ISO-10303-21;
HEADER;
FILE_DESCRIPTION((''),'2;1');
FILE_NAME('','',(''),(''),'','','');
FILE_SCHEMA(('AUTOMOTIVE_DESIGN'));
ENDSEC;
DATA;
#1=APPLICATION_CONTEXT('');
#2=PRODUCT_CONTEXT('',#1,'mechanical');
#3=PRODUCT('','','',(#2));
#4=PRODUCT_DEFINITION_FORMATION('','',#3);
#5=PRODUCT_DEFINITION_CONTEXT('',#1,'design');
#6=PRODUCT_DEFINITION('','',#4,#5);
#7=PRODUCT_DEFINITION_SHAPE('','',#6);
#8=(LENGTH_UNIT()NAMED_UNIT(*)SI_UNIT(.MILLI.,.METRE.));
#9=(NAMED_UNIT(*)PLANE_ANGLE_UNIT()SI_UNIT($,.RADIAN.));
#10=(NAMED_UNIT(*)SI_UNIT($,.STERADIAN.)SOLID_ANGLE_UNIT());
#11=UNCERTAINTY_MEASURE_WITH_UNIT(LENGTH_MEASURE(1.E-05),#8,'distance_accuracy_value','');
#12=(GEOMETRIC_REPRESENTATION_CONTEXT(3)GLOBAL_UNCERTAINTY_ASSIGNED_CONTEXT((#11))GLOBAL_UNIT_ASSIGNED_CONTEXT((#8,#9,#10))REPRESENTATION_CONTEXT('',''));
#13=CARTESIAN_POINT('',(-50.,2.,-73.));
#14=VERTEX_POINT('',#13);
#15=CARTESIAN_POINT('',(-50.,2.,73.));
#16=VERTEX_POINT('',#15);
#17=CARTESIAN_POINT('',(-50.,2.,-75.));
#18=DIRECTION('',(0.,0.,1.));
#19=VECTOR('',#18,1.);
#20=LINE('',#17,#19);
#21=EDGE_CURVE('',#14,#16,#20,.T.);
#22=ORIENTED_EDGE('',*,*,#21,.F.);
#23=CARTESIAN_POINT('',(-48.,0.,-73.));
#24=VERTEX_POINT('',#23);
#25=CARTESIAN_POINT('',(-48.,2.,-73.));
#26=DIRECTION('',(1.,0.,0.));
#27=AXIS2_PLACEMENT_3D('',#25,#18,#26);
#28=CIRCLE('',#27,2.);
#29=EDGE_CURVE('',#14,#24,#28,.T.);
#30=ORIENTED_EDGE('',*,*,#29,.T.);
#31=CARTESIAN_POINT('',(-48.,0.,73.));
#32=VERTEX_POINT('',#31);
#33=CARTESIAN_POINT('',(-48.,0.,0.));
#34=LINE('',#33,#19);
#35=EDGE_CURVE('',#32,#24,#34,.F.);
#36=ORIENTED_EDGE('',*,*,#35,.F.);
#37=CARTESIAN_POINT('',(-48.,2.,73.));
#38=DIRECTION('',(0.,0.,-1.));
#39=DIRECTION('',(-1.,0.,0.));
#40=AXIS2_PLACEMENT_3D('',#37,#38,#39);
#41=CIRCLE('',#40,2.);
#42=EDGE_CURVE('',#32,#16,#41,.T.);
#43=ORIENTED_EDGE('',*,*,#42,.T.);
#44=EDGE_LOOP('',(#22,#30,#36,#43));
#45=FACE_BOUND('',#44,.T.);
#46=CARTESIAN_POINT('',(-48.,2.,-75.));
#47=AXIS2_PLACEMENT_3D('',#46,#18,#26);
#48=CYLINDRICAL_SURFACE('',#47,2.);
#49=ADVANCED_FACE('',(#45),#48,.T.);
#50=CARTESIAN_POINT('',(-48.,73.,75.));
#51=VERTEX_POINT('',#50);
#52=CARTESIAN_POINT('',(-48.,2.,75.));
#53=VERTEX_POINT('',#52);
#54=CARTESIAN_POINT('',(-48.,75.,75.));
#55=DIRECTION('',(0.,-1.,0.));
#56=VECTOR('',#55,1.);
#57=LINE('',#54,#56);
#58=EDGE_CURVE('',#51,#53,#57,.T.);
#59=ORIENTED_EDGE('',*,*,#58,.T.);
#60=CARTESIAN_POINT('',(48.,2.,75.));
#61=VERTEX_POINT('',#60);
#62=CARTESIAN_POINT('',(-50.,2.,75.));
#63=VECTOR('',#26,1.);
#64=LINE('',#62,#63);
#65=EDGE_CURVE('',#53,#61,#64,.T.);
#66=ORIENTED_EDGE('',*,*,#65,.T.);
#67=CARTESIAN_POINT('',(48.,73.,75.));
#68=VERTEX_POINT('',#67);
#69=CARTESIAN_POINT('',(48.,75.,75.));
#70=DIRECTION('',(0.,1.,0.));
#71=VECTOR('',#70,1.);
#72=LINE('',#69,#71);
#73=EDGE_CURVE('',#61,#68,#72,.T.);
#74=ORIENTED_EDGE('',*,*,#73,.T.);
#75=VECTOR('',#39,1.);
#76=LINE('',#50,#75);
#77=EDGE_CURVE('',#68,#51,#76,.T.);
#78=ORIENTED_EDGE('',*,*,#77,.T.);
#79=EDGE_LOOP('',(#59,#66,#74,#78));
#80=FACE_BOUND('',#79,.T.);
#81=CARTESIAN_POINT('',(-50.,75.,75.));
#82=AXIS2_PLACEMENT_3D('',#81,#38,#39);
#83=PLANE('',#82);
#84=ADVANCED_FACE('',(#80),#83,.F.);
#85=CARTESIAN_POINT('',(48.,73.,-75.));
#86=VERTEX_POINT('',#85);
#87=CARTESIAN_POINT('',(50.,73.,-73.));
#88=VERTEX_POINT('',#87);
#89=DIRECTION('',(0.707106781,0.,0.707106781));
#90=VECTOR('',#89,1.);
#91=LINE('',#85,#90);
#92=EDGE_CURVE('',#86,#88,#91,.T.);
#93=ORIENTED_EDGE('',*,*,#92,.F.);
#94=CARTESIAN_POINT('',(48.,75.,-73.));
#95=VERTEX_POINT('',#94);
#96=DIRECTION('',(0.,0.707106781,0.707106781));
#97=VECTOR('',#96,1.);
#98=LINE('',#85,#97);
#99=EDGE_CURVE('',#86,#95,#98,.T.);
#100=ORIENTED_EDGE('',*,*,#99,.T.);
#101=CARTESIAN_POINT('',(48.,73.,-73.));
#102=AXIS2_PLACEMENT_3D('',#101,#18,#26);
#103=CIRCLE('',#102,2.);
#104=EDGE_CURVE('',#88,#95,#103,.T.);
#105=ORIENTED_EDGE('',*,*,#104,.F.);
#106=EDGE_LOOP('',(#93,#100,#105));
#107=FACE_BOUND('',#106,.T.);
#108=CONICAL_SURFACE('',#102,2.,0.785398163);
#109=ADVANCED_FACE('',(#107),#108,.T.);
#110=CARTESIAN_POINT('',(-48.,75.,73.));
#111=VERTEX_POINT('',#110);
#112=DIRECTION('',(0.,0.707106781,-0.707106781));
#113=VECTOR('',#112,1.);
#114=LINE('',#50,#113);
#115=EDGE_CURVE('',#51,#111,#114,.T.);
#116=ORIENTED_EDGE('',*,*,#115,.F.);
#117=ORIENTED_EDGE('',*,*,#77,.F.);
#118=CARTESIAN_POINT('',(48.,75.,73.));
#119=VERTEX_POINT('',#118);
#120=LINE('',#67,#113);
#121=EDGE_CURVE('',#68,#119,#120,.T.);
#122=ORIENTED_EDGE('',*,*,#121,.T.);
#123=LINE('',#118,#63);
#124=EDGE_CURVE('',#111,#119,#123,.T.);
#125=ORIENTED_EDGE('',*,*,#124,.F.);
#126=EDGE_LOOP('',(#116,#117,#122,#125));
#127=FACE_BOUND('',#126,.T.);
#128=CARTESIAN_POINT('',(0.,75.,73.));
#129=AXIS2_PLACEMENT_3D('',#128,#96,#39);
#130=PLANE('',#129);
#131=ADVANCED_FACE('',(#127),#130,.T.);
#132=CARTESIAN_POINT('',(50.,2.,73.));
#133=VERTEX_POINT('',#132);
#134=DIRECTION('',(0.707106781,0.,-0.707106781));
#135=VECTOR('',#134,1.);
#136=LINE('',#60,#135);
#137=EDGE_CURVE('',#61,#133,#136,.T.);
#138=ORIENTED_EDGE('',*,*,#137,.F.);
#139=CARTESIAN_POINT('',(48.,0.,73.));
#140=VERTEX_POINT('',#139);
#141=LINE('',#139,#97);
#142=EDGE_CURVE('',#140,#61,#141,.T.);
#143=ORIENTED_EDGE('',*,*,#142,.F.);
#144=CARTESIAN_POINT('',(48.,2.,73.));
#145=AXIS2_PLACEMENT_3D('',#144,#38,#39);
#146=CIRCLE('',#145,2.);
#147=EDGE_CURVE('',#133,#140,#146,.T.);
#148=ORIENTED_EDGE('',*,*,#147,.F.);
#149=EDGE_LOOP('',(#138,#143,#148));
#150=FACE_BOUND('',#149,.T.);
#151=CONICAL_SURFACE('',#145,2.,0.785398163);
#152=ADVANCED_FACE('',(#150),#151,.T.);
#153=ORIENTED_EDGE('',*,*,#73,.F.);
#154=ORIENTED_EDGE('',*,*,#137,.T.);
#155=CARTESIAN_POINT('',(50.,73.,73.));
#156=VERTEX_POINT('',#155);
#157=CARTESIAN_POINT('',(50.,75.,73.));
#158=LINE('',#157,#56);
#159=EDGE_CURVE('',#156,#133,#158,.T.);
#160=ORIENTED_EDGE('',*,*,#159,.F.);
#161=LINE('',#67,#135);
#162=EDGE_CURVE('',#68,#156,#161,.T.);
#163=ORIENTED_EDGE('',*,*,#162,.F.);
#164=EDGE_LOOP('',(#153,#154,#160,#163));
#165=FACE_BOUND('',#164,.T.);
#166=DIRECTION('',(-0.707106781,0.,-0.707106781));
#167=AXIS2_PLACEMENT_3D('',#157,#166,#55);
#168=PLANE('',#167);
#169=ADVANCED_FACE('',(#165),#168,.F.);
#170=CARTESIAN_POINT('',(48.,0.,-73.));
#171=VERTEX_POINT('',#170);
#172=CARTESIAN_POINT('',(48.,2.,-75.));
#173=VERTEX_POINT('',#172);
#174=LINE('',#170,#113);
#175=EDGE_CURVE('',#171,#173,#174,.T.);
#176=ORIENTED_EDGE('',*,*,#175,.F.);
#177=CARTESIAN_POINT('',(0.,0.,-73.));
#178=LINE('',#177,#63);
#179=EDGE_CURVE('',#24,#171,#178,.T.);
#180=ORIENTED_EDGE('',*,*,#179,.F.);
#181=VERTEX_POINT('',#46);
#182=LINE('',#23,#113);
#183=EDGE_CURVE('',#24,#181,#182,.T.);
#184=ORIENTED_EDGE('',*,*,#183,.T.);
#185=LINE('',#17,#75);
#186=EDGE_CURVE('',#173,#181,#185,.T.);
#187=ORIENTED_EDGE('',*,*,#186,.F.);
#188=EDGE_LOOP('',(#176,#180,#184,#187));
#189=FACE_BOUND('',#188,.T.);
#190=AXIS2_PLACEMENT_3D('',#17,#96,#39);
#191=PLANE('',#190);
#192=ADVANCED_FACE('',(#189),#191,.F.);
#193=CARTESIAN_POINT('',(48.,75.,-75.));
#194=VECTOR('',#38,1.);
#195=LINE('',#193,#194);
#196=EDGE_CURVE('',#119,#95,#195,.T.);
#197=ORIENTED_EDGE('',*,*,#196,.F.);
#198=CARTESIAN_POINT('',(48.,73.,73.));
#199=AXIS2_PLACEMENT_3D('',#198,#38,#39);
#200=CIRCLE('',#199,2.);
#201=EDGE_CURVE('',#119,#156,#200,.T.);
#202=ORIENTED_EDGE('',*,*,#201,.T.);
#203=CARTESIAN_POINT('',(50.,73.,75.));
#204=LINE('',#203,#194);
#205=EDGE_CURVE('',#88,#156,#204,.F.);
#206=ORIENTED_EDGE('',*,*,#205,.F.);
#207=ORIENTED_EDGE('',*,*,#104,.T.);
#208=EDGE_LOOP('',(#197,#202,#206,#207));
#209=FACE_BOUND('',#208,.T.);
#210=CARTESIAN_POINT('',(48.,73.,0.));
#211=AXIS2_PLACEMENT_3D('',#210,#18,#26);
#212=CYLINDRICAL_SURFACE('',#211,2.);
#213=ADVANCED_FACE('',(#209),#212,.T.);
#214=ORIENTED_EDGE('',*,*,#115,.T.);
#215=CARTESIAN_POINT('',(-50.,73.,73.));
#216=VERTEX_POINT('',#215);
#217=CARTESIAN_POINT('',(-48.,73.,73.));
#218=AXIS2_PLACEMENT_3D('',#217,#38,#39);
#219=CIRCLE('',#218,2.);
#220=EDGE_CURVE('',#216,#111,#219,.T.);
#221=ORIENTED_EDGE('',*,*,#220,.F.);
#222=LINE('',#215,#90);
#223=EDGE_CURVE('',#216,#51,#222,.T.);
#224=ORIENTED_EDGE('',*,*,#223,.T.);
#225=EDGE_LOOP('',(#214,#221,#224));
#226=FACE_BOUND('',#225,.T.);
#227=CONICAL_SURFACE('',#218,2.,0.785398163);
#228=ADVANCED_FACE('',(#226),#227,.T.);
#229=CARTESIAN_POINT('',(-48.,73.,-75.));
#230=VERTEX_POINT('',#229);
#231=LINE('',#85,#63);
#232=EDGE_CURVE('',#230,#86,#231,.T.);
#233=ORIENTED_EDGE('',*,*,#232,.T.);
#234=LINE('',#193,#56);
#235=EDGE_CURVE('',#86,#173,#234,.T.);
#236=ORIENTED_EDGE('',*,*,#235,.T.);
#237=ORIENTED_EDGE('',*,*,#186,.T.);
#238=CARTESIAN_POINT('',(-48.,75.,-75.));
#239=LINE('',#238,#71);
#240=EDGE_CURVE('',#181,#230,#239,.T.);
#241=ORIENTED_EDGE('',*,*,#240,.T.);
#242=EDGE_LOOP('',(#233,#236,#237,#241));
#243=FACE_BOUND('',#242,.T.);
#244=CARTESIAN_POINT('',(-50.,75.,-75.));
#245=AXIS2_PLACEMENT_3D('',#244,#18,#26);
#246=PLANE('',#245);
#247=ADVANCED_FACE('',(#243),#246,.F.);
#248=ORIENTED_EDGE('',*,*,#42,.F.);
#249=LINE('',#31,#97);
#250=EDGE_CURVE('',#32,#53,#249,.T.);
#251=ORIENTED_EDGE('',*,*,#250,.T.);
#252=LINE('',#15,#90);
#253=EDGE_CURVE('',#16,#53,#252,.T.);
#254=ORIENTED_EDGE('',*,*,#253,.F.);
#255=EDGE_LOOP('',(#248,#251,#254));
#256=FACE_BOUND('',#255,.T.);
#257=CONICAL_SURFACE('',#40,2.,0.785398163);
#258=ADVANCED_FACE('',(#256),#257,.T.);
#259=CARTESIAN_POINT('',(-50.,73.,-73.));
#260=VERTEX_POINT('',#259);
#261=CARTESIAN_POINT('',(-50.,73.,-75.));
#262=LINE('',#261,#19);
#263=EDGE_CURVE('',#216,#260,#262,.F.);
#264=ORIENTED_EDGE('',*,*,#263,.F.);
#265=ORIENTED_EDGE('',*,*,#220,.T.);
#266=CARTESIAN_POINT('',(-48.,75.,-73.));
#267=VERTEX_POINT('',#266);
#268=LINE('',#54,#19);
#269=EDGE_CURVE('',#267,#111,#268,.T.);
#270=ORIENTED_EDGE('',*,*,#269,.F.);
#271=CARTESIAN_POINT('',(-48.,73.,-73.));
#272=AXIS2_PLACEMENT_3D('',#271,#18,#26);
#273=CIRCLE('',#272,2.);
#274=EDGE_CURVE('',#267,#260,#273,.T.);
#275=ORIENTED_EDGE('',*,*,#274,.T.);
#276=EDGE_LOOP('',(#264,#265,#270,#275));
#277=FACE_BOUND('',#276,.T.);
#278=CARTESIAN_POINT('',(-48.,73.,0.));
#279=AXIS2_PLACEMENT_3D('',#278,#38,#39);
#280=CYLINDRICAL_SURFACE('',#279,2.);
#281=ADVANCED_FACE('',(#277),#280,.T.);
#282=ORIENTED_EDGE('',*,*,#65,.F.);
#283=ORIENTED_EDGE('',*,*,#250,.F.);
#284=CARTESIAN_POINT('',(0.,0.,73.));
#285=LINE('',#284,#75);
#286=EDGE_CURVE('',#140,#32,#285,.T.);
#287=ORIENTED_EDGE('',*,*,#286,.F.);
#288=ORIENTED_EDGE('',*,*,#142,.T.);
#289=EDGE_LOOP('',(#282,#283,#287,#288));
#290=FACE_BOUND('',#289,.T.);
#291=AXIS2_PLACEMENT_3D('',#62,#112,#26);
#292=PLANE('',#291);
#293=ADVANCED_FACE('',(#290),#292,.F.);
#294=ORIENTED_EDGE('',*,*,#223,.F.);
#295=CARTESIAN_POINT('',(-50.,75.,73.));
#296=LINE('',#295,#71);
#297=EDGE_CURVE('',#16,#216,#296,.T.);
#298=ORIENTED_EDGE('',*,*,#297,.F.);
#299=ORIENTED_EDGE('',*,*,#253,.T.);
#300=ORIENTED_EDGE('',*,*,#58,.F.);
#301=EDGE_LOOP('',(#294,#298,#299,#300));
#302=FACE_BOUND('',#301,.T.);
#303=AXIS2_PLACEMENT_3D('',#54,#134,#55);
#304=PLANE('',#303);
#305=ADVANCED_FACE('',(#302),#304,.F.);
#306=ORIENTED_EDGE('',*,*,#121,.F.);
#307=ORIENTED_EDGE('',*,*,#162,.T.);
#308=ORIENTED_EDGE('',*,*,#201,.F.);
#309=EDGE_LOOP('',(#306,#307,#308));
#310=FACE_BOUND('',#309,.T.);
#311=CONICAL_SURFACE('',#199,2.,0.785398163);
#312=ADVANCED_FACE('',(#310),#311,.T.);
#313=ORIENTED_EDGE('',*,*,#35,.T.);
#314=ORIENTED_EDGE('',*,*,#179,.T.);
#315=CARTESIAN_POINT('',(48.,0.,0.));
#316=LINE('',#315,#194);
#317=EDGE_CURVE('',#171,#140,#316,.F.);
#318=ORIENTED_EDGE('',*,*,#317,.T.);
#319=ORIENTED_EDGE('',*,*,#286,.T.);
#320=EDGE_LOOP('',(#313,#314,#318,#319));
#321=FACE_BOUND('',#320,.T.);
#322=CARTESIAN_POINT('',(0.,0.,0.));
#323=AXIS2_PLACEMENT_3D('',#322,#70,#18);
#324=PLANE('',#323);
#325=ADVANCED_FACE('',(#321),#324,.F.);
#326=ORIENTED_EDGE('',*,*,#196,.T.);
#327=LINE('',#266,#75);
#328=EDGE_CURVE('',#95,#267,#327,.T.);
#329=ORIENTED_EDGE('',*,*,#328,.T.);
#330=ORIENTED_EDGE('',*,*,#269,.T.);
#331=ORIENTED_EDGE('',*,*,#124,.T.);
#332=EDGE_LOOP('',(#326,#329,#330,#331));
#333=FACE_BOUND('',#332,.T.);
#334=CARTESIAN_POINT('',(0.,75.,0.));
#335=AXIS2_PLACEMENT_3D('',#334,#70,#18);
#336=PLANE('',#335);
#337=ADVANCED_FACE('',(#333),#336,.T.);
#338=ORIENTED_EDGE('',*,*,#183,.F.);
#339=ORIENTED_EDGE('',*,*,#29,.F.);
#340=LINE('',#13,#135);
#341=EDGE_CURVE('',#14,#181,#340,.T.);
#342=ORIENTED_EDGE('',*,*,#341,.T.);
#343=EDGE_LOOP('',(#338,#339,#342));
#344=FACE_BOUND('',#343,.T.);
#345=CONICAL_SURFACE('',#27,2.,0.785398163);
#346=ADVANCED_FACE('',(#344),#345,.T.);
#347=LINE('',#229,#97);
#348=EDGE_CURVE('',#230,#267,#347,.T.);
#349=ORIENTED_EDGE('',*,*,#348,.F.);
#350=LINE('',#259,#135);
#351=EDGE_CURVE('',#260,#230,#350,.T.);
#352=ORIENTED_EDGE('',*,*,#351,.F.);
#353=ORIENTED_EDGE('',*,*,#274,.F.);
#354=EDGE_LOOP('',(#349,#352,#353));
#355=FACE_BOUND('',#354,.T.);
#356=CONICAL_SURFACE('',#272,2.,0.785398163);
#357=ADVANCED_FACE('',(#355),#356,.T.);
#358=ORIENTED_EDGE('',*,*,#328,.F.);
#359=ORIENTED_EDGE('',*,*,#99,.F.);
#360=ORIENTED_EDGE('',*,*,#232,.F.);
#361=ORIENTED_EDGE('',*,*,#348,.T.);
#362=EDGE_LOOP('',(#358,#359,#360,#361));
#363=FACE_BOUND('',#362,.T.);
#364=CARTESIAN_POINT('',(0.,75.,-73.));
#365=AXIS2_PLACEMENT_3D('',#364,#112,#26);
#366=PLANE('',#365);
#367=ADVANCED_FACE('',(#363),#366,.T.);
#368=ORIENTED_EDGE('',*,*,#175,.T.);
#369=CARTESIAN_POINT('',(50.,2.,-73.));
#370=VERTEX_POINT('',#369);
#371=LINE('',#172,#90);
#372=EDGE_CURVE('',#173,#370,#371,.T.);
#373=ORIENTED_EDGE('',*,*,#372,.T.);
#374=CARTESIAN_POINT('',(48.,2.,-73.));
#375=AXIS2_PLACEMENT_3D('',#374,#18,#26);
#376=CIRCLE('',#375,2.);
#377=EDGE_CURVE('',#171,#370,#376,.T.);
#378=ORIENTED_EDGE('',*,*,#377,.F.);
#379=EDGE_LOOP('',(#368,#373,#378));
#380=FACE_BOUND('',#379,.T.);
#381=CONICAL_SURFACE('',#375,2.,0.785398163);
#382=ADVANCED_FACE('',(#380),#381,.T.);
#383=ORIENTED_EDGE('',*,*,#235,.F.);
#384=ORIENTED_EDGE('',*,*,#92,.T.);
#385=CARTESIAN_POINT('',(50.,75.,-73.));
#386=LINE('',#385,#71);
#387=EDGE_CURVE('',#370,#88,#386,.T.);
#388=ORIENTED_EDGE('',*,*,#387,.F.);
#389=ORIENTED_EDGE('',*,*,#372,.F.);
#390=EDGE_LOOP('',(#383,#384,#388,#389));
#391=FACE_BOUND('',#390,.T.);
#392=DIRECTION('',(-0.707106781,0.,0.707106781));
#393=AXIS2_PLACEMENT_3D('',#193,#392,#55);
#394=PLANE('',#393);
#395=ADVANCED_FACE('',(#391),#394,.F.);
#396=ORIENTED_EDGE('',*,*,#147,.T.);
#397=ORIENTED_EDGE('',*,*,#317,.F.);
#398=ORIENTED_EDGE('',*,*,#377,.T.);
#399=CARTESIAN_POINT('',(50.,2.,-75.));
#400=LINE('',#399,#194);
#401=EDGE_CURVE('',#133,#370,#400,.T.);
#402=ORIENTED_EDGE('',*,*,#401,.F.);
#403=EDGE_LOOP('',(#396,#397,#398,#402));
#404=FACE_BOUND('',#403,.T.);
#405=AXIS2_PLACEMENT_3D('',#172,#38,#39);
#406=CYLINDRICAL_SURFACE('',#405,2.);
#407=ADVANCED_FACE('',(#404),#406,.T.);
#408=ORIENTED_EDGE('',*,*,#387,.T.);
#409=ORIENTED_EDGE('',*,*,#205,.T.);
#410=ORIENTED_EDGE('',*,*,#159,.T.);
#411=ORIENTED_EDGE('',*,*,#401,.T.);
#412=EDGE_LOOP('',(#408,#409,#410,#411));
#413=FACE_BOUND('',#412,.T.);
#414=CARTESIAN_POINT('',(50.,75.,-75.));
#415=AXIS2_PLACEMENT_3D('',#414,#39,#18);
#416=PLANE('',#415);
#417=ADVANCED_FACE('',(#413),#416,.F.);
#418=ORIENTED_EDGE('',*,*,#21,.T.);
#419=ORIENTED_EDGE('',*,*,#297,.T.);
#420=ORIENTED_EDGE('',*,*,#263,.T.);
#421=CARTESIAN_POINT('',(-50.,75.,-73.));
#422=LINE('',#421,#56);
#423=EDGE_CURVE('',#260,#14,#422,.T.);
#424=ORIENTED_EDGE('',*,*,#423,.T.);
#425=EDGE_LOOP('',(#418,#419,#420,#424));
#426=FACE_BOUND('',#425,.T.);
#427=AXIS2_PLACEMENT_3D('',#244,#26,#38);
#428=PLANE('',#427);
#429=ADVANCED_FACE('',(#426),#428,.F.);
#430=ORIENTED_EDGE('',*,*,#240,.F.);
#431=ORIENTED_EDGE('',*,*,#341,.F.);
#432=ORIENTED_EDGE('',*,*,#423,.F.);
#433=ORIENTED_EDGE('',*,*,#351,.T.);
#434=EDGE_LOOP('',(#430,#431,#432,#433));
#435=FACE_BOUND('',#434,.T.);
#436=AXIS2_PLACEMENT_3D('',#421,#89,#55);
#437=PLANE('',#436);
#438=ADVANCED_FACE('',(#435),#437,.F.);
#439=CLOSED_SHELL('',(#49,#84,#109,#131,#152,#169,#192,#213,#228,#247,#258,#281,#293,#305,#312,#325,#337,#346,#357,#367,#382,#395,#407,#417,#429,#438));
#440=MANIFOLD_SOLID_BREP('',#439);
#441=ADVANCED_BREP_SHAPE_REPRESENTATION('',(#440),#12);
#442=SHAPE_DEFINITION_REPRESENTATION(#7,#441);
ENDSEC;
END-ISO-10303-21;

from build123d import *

# Parameters (mm, degrees)
SKETCH1_W           = 100
SKETCH1_H           = 150
BOSS_EXTRUDE1_DEPTH = 75
FILLET1_R           = 2
CHAMFER1_SIZE       = 2


with BuildPart() as part:
    # Sketch1 → Boss-Extrude1 (new body)
    with BuildSketch(Plane(origin=(0, 0, 0), x_dir=(1, 0, 0), z_dir=(0, 1, 0))):
        Rectangle(SKETCH1_W, SKETCH1_H)
    extrude(amount=BOSS_EXTRUDE1_DEPTH)

    # Fillet1
    fillet1_edges = [part.edges().sort_by_distance(p)[0] for p in [
        (-50, 75, 0),
        (50, 75, 0),
        (-50, 0, 0),
        (50, 0, 0),
    ]]
    fillet(fillet1_edges, radius=FILLET1_R)

    # Chamfer1
    chamfer1_edges = [part.edges().sort_by_distance(p)[0] for p in [
        (-50, 37.5, 75),
        (-50, 37.5, -75),
        (0, 0, 75),
        (50, 37.5, 75),
        (0, 75, 75),
        (49.414213562, 74.414213562, 75),
        (-49.414213562, 74.414213562, 75),
        (49.414213562, 0.585786438, 75),
        (-49.414213562, 0.585786438, 75),
        (0, 0, -75),
        (0, 75, -75),
        (50, 37.5, -75),
        (49.414213562, 74.414213562, -75),
        (-49.414213562, 74.414213562, -75),
        (49.414213562, 0.585786438, -75),
        (-49.414213562, 0.585786438, -75),
    ]]
    chamfer(chamfer1_edges, length=CHAMFER1_SIZE - 0.0001)  # a hair under: the kernel refuses the full size


solid = part.part
